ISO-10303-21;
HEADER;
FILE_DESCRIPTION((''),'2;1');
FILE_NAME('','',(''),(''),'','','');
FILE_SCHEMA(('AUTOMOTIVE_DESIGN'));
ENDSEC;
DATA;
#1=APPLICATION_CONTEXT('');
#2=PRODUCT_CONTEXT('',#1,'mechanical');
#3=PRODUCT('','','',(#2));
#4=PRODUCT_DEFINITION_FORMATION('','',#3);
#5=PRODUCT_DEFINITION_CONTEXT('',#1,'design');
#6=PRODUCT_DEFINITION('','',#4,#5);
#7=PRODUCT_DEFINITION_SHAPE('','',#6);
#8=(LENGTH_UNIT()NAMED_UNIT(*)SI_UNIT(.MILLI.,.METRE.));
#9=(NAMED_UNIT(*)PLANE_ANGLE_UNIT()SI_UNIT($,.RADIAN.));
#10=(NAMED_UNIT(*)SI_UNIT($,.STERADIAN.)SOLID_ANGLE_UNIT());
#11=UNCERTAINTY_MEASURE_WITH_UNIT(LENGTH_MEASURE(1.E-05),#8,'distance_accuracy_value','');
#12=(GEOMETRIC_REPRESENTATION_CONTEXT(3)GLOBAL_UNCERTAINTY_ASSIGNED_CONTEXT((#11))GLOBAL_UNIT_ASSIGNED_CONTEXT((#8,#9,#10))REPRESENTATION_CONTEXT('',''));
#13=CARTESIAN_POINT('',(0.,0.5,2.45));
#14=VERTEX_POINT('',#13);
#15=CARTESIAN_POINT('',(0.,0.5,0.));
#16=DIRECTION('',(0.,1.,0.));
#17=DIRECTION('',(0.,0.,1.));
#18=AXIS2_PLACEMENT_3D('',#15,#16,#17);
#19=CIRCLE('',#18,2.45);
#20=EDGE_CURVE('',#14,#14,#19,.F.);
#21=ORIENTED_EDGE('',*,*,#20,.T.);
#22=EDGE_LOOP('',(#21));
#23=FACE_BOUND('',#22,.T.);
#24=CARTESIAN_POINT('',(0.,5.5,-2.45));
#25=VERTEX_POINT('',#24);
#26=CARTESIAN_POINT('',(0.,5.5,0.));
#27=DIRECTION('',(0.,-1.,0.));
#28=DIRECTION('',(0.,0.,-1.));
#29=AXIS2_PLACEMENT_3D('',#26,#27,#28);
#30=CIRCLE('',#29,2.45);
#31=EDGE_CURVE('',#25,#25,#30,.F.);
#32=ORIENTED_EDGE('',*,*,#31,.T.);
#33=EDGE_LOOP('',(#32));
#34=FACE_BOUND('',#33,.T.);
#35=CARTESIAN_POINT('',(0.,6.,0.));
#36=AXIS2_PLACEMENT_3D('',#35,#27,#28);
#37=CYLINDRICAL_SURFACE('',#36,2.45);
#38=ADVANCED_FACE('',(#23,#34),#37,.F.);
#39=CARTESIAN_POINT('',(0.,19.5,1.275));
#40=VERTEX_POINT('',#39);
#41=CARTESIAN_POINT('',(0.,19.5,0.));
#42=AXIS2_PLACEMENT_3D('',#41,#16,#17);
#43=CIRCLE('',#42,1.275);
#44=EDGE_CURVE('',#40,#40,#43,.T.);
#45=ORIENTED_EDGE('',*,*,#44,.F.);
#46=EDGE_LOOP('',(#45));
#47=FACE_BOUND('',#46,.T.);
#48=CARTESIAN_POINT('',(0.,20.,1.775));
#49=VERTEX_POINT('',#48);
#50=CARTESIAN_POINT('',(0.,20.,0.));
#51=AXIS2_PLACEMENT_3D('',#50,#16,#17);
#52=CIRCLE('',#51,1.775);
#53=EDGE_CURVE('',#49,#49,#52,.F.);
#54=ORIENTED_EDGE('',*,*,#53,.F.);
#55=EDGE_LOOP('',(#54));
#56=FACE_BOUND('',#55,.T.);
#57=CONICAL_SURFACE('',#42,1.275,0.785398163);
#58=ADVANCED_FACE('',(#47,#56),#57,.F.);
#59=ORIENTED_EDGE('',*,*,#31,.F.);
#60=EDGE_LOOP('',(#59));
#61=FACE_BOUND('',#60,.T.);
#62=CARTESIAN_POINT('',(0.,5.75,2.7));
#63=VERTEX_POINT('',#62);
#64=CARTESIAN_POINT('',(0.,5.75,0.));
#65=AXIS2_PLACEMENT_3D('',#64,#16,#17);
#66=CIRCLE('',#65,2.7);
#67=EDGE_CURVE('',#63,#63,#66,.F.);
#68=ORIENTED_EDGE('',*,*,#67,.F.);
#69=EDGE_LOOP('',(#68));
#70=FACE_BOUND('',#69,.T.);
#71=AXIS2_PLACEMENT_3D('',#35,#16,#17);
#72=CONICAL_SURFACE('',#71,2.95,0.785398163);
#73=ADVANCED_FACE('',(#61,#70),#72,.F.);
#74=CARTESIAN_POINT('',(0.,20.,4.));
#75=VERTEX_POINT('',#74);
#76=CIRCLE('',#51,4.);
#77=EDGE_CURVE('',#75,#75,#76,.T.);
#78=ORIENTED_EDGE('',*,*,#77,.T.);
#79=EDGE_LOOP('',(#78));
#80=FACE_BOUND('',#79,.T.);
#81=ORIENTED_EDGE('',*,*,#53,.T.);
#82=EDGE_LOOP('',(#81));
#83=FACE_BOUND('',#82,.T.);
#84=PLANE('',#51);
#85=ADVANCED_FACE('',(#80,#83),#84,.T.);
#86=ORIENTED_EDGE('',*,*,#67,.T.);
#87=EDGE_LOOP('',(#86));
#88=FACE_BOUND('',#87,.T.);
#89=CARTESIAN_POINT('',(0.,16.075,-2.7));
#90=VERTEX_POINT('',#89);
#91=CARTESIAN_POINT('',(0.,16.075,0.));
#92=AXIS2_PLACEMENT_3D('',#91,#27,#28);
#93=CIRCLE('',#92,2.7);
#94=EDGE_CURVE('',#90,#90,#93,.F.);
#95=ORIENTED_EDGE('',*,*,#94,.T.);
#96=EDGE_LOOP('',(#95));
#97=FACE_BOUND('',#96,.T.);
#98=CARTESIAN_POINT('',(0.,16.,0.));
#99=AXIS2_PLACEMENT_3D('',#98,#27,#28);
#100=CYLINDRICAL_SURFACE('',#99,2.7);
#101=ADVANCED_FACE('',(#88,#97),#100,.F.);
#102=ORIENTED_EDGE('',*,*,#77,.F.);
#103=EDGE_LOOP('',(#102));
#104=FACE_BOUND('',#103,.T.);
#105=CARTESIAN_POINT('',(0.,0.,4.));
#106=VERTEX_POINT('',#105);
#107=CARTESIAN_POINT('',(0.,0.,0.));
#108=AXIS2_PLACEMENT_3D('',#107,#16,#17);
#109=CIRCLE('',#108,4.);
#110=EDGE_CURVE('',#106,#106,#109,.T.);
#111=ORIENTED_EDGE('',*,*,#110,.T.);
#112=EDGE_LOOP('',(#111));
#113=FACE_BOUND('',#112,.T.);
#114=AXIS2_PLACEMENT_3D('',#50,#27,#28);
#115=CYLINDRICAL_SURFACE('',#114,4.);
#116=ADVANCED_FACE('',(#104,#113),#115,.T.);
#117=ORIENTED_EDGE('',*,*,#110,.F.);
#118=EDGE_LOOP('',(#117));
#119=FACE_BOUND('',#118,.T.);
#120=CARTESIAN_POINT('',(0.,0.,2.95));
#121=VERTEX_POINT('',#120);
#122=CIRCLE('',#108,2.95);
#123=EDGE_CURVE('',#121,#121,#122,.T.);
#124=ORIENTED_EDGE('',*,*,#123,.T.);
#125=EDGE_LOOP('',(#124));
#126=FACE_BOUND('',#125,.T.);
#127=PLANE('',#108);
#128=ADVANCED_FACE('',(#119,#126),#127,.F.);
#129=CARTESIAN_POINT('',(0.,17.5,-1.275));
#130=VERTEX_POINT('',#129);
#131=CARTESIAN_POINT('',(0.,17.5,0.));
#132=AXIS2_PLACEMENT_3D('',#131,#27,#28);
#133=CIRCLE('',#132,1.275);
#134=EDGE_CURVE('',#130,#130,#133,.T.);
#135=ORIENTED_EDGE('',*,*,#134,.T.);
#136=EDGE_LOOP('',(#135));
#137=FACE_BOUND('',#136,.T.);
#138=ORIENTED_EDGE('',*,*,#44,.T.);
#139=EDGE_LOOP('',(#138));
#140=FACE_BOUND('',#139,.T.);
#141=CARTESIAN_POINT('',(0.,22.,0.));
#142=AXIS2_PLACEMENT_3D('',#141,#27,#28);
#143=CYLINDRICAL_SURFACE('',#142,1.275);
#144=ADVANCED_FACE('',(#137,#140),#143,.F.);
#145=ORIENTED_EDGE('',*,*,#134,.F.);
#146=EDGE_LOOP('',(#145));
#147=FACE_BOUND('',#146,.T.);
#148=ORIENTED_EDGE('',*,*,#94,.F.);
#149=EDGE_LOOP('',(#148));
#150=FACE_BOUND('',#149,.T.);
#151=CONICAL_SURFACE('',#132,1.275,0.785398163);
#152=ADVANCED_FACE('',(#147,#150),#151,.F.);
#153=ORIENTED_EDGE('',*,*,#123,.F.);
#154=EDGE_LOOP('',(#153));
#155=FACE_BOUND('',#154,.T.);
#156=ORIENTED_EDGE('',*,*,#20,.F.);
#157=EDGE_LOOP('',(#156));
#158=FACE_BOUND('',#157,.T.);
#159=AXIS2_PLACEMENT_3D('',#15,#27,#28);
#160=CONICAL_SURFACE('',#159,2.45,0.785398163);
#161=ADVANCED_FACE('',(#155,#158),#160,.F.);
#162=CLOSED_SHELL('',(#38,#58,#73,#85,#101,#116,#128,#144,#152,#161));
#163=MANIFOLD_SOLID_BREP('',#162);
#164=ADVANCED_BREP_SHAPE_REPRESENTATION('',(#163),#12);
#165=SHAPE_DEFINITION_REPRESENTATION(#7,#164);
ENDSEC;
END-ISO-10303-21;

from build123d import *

# Parameters (mm, degrees)
SKETCH1_R           = 4
BOSS_EXTRUDE1_DEPTH = 20
SKETCH2_R           = 2.45
CUT_EXTRUDE1_DEPTH  = 6
SKETCH3_R           = 2.7
CUT_EXTRUDE2_DEPTH  = 10
SKETCH4_R           = 1.275
CUT_EXTRUDE3_DEPTH  = 6
CHAMFER1_SIZE       = 0.5
CHAMFER2_SIZE       = 1.5


with BuildPart() as part:
    # Sketch1 → Boss-Extrude1 (new body)
    with BuildSketch(Plane(origin=(0, 0, 0), x_dir=(1, 0, 0), z_dir=(0, 1, 0))):
        with Locations(Location((0, 0, 0), (0, 0, 270))):
            Circle(SKETCH1_R)
    extrude(amount=BOSS_EXTRUDE1_DEPTH)

    # Sketch2 → Cut-Extrude1 (cut)
    with BuildSketch(Plane.XZ):
        with Locations(Location((0, 0, 0), (0, 0, 270))):
            Circle(SKETCH2_R)
    extrude(amount=-CUT_EXTRUDE1_DEPTH, mode=Mode.SUBTRACT)

    # Sketch3 → Cut-Extrude2 (cut)
    with BuildSketch(Plane.XZ.offset(-6)):
        with Locations(Location((0, 0, 0), (0, 0, 270))):
            Circle(SKETCH3_R)
    extrude(amount=-CUT_EXTRUDE2_DEPTH, mode=Mode.SUBTRACT)

    # Sketch4 → Cut-Extrude3 (cut)
    with BuildSketch(Plane.XZ.offset(-16)):
        with Locations(Location((0, 0, 0), (0, 0, 270))):
            Circle(SKETCH4_R)
    extrude(amount=-CUT_EXTRUDE3_DEPTH, mode=Mode.SUBTRACT)

    # Chamfer1
    # the kernel refuses this chamfer: 0.5 mm, written as the material it takes off along each edge
    with BuildSketch(Plane(origin=(0, 0, 0), x_dir=(0, 0, -1), z_dir=(-1, 0, 0))) as chamfer1_piece_1:
        Polygon((2.45 + CHAMFER1_SIZE, 0), (2.45, -CHAMFER1_SIZE), (2.45, 0), align=None)
    revolve(axis=Axis((0, 0, 0), (0, -1, 0)), mode=Mode.SUBTRACT)
    with BuildSketch(Plane(origin=(0, 6, 0), x_dir=(0, 0, -1), z_dir=(-1, 0, 0))) as chamfer1_piece_2_section:
        Polygon((2.45, CHAMFER1_SIZE), (2.45 + CHAMFER1_SIZE, 0), (2.45, 0), align=None)
    chamfer1_piece_2 = revolve(axis=Axis((0, 6, 0), (0, -1, 0)), mode=Mode.PRIVATE)
    chamfer1_piece_2 = chamfer1_piece_2 & Plane(origin=(0, 5.626269224, 0), x_dir=(0, 0, -1), z_dir=(0, -1, 0)) * Cylinder(2.7, 12, mode=Mode.PRIVATE)
    add(chamfer1_piece_2, mode=Mode.SUBTRACT)
    with BuildSketch(Plane(origin=(0, 20, 0), x_dir=(0, 0, -1), z_dir=(-1, 0, 0))) as chamfer1_piece_3:
        Polygon((1.275 + CHAMFER1_SIZE, 0), (1.275, CHAMFER1_SIZE), (1.275, 0), align=None)
    revolve(axis=Axis((0, 20, 0), (0, -1, 0)), mode=Mode.SUBTRACT)

    # Chamfer2
    # the kernel refuses this chamfer: 1.5 mm, written as the material it takes off along each edge
    with BuildSketch(Plane(origin=(0, 16, 0), x_dir=(0, 0, -1), z_dir=(-1, 0, 0))) as chamfer2_piece_1_section:
        Polygon((1.275, -CHAMFER2_SIZE), (1.275 + CHAMFER2_SIZE, 0), (1.275, 0), align=None)
    chamfer2_piece_1 = revolve(axis=Axis((0, 16, 0), (0, -1, 0)), mode=Mode.PRIVATE)
    chamfer2_piece_1 = chamfer2_piece_1 & Plane(origin=(0, 16.79183668, 0), x_dir=(0, 0, -1), z_dir=(0, -1, 0)) * Cylinder(2.7, 12, mode=Mode.PRIVATE)
    add(chamfer2_piece_1, mode=Mode.SUBTRACT)


solid = part.part
